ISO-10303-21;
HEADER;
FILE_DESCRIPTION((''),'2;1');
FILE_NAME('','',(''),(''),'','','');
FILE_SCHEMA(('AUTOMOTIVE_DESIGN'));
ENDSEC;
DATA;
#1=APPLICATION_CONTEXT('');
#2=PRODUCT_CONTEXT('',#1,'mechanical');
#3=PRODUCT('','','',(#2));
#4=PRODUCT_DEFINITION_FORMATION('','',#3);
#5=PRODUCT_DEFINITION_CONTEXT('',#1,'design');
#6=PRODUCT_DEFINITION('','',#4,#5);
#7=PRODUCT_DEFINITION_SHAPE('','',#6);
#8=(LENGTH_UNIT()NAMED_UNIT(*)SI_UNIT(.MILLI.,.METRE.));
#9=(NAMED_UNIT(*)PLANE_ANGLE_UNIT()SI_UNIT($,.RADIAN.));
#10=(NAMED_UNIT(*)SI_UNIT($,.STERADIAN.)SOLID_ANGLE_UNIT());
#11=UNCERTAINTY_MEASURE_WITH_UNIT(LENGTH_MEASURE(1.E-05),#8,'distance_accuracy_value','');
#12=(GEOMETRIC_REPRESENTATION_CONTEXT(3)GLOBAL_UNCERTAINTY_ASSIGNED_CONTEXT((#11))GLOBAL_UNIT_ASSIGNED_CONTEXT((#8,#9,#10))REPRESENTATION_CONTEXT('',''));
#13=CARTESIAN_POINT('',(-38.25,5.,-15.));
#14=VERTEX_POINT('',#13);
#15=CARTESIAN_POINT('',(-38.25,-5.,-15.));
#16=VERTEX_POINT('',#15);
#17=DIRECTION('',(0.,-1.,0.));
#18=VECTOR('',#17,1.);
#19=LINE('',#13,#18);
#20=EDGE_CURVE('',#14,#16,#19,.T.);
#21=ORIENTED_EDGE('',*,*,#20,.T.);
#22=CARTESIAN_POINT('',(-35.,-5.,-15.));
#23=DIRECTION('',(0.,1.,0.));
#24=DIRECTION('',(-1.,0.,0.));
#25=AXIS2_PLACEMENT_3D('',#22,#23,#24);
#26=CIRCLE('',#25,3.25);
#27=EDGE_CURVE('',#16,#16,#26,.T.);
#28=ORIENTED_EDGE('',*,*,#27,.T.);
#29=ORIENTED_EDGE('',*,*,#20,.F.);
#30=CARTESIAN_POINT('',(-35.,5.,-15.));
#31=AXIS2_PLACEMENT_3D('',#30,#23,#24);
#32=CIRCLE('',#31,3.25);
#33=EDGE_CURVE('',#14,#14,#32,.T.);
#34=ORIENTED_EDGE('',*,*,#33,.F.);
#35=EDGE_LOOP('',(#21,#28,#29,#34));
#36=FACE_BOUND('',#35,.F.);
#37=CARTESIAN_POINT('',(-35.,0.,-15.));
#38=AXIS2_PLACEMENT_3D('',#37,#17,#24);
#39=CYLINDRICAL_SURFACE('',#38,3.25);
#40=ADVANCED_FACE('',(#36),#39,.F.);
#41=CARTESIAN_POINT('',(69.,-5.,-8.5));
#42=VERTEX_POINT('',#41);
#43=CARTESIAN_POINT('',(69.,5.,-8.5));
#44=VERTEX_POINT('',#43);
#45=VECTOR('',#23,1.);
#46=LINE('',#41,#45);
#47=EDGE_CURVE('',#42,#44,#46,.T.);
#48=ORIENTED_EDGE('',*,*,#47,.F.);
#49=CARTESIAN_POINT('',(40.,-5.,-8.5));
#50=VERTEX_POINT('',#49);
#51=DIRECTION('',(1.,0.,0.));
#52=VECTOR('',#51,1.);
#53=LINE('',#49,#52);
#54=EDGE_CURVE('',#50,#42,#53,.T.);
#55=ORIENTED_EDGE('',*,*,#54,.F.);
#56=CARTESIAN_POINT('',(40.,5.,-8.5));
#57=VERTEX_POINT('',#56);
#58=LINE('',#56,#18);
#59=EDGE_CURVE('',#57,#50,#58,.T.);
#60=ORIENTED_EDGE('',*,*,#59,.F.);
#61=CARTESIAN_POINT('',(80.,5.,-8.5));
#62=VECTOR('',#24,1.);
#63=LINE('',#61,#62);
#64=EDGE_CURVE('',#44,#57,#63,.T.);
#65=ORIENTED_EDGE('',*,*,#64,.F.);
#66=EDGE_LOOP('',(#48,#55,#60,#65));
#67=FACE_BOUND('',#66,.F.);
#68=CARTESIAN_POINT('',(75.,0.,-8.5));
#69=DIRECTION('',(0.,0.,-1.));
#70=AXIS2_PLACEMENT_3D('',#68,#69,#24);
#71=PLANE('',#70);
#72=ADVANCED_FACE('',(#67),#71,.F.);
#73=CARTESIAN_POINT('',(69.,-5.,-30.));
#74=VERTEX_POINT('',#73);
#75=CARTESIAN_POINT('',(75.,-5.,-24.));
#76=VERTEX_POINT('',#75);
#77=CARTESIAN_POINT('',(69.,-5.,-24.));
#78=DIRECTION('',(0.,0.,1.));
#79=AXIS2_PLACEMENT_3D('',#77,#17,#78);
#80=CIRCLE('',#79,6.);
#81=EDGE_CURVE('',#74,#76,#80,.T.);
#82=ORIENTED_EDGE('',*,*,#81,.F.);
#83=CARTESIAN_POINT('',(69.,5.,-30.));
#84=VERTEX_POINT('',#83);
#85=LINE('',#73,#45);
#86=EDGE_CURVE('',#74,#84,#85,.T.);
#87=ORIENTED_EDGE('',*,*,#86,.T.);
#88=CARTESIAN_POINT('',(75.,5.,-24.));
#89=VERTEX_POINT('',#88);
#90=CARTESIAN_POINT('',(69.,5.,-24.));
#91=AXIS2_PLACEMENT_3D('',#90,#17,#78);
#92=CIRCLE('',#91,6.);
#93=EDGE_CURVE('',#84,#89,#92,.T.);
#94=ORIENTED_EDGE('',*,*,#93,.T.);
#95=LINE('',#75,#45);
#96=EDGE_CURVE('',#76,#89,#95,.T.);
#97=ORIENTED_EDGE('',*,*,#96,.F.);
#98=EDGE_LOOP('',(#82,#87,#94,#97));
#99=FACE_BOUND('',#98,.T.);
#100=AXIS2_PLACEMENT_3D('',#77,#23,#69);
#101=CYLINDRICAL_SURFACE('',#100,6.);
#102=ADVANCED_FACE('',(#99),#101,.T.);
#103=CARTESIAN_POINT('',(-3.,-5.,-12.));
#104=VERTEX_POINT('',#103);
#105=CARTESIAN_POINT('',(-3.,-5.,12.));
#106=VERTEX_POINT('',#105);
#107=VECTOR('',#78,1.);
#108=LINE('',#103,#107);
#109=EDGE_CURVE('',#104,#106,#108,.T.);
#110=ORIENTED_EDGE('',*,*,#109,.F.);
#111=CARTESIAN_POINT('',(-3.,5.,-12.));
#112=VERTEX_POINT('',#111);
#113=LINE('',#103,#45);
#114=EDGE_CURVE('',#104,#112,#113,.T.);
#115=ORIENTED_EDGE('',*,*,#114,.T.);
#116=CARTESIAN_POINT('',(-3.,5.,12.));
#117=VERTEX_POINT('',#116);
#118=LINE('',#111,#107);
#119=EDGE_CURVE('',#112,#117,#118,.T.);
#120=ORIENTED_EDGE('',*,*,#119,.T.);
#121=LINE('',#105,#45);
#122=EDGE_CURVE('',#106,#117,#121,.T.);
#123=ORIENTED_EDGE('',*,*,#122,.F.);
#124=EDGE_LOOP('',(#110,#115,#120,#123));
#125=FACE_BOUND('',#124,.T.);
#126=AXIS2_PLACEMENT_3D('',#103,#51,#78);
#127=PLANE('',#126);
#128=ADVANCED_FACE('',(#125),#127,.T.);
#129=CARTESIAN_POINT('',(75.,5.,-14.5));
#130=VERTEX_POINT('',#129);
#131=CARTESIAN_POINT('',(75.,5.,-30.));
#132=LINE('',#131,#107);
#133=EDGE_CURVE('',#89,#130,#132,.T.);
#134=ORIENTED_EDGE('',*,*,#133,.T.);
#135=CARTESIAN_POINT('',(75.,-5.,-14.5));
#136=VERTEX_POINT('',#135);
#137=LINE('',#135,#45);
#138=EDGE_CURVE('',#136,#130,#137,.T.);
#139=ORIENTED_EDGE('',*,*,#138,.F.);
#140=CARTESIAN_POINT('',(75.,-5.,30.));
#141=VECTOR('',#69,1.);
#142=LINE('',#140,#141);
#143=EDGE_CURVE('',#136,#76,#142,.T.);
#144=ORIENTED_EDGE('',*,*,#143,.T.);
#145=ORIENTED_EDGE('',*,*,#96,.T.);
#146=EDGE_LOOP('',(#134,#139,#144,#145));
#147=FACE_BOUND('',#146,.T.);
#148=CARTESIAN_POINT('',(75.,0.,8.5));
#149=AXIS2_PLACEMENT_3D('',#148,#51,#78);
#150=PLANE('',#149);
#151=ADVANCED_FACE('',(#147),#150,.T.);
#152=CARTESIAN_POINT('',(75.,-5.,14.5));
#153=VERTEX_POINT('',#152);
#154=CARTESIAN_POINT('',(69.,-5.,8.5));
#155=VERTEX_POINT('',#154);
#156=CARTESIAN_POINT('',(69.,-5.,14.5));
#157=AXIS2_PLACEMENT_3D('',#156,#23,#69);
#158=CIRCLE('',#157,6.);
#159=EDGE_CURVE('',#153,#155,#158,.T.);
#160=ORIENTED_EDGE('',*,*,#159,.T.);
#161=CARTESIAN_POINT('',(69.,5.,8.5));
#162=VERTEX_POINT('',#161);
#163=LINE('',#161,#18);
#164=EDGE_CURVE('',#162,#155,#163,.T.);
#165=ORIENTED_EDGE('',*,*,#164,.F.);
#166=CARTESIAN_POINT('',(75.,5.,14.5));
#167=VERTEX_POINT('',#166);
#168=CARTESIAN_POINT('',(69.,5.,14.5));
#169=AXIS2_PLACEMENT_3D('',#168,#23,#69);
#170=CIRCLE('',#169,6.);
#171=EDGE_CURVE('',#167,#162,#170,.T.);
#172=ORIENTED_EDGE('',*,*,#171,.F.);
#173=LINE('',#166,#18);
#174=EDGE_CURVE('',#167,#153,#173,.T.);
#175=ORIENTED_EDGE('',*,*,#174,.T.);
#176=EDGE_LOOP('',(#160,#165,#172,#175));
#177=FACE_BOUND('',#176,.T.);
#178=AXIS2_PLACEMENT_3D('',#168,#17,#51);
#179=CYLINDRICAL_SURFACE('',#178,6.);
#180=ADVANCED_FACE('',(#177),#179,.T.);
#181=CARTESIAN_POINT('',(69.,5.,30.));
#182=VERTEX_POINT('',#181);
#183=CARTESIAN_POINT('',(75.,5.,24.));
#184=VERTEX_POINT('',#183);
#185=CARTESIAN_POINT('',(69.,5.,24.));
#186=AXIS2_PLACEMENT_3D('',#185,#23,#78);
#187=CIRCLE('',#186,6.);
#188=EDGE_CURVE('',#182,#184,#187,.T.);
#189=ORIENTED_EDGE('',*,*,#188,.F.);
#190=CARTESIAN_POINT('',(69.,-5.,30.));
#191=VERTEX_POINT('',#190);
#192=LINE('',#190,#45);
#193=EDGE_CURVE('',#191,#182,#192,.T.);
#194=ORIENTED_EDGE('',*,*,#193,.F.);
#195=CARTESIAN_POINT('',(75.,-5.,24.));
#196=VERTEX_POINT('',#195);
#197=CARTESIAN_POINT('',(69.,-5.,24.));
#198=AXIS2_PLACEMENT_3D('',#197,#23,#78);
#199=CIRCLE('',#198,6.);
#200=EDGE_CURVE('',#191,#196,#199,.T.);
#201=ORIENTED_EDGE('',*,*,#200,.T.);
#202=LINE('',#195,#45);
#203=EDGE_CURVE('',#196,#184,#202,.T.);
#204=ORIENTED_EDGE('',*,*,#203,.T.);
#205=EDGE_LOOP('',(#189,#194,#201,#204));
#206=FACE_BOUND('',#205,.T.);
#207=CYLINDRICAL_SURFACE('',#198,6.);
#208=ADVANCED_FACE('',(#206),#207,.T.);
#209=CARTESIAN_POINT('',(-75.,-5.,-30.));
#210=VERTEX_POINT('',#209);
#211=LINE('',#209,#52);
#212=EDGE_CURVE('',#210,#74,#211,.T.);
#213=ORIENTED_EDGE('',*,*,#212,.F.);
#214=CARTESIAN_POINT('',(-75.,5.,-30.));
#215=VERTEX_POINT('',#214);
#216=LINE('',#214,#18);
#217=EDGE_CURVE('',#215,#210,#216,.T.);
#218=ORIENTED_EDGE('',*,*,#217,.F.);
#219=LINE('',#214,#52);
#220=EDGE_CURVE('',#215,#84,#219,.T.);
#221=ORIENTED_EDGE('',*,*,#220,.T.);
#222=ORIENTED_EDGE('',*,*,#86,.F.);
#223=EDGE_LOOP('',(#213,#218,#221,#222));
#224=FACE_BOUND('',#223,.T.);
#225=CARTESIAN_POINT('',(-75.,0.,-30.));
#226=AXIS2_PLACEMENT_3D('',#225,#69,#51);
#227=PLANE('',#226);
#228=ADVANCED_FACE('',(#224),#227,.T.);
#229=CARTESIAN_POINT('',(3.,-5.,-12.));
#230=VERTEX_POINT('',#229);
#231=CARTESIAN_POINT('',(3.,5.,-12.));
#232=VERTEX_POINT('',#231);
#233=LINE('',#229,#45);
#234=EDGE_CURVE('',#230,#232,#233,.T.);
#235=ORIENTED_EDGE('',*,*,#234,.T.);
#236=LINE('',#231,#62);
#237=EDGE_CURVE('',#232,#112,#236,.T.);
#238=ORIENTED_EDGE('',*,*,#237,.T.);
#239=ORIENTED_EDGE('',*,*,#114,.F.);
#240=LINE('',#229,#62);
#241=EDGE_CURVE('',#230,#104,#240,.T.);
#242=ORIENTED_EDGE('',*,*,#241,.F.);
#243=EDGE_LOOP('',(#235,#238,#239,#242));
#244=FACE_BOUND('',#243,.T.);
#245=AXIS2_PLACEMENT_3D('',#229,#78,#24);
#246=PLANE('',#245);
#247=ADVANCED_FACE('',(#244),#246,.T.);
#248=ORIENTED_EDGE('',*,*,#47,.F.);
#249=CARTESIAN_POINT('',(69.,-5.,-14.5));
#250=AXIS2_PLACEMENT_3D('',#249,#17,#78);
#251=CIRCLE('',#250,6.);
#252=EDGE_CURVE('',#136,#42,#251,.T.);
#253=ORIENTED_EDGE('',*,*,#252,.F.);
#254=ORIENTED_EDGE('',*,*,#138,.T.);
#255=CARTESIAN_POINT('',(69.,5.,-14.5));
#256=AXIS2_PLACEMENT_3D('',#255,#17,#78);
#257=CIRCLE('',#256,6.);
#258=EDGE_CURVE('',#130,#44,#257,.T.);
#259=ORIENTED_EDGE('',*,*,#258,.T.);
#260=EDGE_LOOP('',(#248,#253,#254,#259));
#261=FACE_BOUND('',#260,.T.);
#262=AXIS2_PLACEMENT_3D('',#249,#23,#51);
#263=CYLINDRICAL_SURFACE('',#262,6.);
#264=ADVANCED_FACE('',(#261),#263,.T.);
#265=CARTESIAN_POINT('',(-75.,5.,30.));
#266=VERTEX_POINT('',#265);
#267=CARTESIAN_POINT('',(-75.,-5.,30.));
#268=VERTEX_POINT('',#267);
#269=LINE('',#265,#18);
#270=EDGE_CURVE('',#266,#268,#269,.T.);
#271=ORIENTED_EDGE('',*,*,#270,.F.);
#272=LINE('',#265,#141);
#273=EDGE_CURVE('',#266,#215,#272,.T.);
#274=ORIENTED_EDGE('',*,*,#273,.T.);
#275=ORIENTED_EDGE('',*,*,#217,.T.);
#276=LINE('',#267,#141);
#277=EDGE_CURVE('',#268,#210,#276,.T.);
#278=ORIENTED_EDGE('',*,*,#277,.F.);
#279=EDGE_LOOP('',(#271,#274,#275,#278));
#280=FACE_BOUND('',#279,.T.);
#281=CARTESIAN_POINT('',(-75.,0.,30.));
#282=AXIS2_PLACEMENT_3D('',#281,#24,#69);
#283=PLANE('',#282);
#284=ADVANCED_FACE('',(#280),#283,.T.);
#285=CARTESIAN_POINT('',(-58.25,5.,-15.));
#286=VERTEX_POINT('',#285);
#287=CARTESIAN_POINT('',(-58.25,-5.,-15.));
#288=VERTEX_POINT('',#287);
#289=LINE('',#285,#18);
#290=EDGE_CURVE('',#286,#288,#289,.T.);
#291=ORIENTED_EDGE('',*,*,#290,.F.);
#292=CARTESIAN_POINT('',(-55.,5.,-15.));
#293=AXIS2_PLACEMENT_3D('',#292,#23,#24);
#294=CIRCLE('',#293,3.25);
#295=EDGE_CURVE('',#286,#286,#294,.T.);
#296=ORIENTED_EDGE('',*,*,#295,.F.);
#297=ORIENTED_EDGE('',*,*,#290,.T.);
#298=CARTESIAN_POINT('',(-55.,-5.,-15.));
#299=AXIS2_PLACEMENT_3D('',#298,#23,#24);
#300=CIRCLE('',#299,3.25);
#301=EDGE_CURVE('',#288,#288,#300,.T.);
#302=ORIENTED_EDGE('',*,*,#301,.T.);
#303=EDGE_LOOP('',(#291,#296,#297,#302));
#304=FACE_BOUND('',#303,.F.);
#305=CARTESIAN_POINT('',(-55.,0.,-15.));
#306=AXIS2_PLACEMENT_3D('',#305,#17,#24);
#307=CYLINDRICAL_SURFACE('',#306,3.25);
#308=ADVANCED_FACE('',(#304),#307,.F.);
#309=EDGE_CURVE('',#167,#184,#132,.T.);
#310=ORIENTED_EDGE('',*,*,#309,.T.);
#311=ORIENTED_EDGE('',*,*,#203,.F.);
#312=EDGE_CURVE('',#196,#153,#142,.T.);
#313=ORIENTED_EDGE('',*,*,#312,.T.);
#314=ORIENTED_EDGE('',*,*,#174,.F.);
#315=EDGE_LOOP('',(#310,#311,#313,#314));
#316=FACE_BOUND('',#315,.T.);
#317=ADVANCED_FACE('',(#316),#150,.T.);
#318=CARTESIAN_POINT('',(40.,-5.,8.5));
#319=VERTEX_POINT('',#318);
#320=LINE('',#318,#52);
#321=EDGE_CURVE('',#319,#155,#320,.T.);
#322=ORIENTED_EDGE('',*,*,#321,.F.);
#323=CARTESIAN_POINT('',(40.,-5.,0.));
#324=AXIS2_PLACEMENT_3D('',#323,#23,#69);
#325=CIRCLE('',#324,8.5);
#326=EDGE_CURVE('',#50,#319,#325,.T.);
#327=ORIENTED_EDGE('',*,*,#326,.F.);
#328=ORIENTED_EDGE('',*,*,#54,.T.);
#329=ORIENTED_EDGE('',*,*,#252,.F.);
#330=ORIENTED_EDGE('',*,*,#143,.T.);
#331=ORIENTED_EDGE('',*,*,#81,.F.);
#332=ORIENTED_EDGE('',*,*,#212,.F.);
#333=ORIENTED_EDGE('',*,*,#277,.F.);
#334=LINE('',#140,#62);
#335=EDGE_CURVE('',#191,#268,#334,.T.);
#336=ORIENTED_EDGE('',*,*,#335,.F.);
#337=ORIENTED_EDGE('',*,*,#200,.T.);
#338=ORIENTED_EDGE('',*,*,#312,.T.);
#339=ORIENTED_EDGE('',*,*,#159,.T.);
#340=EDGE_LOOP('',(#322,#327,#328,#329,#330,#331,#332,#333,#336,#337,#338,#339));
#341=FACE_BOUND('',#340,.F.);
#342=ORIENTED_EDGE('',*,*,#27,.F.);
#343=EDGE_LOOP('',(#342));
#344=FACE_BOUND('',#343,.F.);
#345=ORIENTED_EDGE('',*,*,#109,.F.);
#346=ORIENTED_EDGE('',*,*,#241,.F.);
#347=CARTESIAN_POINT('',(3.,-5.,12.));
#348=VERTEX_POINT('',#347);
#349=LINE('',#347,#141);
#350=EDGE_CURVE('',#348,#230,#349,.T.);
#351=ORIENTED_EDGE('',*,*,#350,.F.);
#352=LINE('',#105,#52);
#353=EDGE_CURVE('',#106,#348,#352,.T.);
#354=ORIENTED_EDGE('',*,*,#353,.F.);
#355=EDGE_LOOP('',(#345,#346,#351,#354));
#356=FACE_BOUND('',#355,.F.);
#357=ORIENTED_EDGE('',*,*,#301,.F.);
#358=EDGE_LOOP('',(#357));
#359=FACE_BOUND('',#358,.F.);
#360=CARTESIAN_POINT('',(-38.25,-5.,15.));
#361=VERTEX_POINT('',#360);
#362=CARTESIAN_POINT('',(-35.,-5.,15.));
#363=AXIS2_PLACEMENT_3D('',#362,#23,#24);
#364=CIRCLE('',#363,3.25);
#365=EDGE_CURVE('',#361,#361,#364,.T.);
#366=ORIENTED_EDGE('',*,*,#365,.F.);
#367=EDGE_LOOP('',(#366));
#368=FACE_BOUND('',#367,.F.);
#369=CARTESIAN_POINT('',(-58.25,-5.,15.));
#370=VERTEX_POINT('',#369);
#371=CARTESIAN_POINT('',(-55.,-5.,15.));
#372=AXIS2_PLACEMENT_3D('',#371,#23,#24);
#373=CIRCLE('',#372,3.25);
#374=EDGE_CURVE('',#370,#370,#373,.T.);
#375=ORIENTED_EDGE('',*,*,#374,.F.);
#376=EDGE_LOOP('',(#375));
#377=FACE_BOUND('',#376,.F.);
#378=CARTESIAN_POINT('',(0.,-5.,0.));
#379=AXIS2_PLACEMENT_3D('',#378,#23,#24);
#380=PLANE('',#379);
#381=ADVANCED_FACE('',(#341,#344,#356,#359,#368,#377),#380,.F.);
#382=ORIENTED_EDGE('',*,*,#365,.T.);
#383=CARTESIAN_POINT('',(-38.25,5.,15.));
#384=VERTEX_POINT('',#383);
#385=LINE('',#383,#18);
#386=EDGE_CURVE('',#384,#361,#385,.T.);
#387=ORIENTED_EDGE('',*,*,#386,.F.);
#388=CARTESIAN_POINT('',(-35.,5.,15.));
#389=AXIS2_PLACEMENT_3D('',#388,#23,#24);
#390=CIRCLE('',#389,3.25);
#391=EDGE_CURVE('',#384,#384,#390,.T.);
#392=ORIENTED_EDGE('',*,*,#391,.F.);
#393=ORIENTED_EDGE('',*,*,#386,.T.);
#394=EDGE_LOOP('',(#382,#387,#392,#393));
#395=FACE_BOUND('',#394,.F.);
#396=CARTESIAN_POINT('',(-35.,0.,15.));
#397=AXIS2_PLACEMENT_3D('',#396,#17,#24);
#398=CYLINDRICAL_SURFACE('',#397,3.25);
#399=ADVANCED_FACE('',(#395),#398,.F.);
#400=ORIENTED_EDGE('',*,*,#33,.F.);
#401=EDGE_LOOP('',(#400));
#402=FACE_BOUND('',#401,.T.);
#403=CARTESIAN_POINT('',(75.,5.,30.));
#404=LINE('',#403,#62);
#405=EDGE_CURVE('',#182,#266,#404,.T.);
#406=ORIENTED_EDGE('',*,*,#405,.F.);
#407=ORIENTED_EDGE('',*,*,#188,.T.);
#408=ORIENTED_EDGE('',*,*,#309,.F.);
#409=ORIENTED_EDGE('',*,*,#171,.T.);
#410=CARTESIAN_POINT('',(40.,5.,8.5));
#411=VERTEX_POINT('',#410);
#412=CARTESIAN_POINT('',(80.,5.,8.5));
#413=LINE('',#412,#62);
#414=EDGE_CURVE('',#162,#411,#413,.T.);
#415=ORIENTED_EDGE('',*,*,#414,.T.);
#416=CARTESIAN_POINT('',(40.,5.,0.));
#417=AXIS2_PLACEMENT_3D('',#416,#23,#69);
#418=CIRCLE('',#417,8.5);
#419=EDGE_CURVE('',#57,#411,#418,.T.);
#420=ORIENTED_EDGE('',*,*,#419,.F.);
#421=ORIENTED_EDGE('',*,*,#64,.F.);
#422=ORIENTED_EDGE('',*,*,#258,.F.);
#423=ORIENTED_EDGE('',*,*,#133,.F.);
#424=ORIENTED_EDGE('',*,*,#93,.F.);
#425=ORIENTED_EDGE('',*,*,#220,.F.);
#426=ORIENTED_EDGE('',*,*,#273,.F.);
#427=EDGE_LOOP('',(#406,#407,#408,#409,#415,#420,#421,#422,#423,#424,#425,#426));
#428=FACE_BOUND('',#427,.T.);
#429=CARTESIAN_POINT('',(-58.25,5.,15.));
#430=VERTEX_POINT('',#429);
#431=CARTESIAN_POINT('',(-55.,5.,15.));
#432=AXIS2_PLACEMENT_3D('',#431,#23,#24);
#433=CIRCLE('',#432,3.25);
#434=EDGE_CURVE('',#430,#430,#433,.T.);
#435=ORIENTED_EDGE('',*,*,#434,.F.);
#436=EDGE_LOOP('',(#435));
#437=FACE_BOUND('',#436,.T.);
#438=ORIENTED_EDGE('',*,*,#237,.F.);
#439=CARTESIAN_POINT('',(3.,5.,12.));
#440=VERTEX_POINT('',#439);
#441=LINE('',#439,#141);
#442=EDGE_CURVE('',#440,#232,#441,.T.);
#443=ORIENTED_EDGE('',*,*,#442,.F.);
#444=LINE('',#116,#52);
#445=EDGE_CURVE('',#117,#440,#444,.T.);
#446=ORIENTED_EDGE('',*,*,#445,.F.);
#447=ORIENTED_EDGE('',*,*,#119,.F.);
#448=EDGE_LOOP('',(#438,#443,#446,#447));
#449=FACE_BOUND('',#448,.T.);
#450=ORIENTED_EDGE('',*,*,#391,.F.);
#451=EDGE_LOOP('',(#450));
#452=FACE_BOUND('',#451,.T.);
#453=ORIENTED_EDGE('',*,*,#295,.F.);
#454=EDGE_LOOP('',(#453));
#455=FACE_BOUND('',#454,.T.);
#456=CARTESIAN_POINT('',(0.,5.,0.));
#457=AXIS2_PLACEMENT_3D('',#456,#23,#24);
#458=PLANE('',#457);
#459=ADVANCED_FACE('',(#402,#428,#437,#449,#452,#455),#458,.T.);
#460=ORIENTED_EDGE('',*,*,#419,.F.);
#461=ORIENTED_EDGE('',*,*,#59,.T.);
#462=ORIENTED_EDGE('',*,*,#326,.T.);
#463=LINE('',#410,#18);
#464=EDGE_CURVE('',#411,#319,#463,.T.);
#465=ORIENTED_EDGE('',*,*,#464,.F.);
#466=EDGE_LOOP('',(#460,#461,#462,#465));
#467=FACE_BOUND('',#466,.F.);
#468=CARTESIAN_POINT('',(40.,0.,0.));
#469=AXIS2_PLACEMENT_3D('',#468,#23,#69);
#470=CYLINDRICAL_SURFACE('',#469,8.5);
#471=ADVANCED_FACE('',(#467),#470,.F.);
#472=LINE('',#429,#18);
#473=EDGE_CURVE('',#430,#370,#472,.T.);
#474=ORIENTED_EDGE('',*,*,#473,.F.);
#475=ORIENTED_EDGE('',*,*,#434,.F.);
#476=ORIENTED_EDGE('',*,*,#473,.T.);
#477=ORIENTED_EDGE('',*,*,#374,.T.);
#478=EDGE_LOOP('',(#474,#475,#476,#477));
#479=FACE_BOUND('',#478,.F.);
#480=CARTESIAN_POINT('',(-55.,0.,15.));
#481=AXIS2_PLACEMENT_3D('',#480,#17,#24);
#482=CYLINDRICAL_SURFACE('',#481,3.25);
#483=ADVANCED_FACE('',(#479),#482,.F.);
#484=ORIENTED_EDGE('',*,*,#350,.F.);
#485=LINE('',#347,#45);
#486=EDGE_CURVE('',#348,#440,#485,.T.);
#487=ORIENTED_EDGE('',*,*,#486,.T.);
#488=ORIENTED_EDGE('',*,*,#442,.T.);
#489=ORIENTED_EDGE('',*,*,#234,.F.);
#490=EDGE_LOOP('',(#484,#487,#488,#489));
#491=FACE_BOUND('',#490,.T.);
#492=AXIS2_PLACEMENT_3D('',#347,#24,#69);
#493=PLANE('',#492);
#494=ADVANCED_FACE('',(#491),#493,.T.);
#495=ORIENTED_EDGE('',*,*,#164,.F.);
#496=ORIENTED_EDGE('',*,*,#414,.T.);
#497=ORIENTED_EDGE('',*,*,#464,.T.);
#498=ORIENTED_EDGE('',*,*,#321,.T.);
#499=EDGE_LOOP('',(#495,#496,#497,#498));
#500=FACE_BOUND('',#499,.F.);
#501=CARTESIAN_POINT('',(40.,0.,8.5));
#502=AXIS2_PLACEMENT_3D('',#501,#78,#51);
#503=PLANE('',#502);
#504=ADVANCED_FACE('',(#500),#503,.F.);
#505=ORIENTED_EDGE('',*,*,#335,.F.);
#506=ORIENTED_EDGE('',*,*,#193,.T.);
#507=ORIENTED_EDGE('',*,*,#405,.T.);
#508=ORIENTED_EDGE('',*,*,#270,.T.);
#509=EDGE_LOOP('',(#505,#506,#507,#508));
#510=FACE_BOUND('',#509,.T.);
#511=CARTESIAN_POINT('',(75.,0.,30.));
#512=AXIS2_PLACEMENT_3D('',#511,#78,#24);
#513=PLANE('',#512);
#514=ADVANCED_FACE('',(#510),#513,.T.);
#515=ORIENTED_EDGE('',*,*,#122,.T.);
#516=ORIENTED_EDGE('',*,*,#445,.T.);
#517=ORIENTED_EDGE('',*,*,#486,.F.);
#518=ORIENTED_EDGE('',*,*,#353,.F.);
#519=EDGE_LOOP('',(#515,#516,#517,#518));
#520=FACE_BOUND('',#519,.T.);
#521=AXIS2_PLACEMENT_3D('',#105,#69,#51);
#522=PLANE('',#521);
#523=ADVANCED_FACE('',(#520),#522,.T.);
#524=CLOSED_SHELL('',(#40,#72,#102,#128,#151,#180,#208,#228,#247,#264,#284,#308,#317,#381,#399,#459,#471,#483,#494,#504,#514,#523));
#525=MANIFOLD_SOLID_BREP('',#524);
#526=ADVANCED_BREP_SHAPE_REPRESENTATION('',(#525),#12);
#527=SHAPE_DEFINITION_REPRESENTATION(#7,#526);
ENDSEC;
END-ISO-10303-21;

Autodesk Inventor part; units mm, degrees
ref_plane "YZ Plane" through (0, 0, 0) normal (1, 0, 0) x (0, 1, 0)
ref_plane "XZ Plane" through (0, 0, 0) normal (0, 1, 0) x (-1, 0, 0)
ref_plane "XY Plane" through (0, 0, 0) normal (0, 0, 1) x (1, 0, 0)
sketch "Sketch1" plane through (0, 0, 0) normal (0, 1, 0) x (-1, 0, 0)
  line L0 (-75, 30) -> (75, 30)
  line L1 (75, 30) -> (75, -30)
  line L2 (75, -30) -> (-75, -30)
  line L3 (-75, -30) -> (-75, 30)
  line L4 (-75, 30) -> (75, -30) construction
  line L5 (75, 30) -> (-75, -30) construction
  line L6 (-80, 0) -> (-40, 0) construction
  line L7 (-80, -8.5) -> (-40, -8.5)
  line L8 (-40, 8.5) -> (-80, 8.5)
  arc A0 (-80, 8.5) -> (-80, -8.5) centre (-80, 0) ccw
  arc A1 (-40, -8.5) -> (-40, 8.5) centre (-40, 0) ccw
  circle A2 centre (55, 15) radius 3.25
  circle A3 centre (55, -15) radius 3.25
  circle A4 centre (35, 15) radius 3.25
  circle A5 centre (35, -15) radius 3.25
  point P0 (0, 0)
  point P1 (-60, 0)
  dimension "d0" = 60
  dimension "d1" = 150
  dimension "d2" = 60
  dimension "d3" = 40
  dimension "d4" = 17
  dimension "d5" = 6.5
  dimension "d6" = 15
  dimension "d7" = 30
  dimension "d8" = 20
  dimension "d9" = 20
extrude "Plate1" add sketch "Sketch1" along normal mid plane 10 contours L0 L1 L2 L3 L7 A1 L8 | L8 A1 L7 L3
extrude "Cut1" cut sketch "Sketch1" against normal mid plane 10 contours L8 A1 L7 L3 | L3 L7 A0 L8
sketch "Sketch2" plane through (0, -5, 0) normal (0, -1, 0) x (1, 0, 0)
  line L0 (-3, 12) -> (3, 12)
  line L1 (3, 12) -> (3, -12)
  line L2 (3, -12) -> (-3, -12)
  line L3 (-3, -12) -> (-3, 12)
  line L4 (75, 30) -> (-75, 30) projected
  point P0 (0, 0)
  point P1 (0, 12)
  dimension "d13" = 24
  dimension "d14" = 18
  dimension "d15" = 6
extrude "Cut2" cut sketch "Sketch2" against normal blind 10
fillet "Corner Round1" radius 6 4 edges at (75, 0, 30) (75, 0, 8.5) (75, 0, -8.5) (75, 0, -30)
equation "\"d11\" = Thickness"
equation "\"d16\" = Thickness"
equation "\"d10\" = Thickness"
equation "\"BendReliefDepth\" = 0.5 * Thickness"
equation "\"Thickness\" = 10"
properties part number "HCMUTE-CDT23-BAT_TRUC_CANG_TAI" material "Stainless Steel"
